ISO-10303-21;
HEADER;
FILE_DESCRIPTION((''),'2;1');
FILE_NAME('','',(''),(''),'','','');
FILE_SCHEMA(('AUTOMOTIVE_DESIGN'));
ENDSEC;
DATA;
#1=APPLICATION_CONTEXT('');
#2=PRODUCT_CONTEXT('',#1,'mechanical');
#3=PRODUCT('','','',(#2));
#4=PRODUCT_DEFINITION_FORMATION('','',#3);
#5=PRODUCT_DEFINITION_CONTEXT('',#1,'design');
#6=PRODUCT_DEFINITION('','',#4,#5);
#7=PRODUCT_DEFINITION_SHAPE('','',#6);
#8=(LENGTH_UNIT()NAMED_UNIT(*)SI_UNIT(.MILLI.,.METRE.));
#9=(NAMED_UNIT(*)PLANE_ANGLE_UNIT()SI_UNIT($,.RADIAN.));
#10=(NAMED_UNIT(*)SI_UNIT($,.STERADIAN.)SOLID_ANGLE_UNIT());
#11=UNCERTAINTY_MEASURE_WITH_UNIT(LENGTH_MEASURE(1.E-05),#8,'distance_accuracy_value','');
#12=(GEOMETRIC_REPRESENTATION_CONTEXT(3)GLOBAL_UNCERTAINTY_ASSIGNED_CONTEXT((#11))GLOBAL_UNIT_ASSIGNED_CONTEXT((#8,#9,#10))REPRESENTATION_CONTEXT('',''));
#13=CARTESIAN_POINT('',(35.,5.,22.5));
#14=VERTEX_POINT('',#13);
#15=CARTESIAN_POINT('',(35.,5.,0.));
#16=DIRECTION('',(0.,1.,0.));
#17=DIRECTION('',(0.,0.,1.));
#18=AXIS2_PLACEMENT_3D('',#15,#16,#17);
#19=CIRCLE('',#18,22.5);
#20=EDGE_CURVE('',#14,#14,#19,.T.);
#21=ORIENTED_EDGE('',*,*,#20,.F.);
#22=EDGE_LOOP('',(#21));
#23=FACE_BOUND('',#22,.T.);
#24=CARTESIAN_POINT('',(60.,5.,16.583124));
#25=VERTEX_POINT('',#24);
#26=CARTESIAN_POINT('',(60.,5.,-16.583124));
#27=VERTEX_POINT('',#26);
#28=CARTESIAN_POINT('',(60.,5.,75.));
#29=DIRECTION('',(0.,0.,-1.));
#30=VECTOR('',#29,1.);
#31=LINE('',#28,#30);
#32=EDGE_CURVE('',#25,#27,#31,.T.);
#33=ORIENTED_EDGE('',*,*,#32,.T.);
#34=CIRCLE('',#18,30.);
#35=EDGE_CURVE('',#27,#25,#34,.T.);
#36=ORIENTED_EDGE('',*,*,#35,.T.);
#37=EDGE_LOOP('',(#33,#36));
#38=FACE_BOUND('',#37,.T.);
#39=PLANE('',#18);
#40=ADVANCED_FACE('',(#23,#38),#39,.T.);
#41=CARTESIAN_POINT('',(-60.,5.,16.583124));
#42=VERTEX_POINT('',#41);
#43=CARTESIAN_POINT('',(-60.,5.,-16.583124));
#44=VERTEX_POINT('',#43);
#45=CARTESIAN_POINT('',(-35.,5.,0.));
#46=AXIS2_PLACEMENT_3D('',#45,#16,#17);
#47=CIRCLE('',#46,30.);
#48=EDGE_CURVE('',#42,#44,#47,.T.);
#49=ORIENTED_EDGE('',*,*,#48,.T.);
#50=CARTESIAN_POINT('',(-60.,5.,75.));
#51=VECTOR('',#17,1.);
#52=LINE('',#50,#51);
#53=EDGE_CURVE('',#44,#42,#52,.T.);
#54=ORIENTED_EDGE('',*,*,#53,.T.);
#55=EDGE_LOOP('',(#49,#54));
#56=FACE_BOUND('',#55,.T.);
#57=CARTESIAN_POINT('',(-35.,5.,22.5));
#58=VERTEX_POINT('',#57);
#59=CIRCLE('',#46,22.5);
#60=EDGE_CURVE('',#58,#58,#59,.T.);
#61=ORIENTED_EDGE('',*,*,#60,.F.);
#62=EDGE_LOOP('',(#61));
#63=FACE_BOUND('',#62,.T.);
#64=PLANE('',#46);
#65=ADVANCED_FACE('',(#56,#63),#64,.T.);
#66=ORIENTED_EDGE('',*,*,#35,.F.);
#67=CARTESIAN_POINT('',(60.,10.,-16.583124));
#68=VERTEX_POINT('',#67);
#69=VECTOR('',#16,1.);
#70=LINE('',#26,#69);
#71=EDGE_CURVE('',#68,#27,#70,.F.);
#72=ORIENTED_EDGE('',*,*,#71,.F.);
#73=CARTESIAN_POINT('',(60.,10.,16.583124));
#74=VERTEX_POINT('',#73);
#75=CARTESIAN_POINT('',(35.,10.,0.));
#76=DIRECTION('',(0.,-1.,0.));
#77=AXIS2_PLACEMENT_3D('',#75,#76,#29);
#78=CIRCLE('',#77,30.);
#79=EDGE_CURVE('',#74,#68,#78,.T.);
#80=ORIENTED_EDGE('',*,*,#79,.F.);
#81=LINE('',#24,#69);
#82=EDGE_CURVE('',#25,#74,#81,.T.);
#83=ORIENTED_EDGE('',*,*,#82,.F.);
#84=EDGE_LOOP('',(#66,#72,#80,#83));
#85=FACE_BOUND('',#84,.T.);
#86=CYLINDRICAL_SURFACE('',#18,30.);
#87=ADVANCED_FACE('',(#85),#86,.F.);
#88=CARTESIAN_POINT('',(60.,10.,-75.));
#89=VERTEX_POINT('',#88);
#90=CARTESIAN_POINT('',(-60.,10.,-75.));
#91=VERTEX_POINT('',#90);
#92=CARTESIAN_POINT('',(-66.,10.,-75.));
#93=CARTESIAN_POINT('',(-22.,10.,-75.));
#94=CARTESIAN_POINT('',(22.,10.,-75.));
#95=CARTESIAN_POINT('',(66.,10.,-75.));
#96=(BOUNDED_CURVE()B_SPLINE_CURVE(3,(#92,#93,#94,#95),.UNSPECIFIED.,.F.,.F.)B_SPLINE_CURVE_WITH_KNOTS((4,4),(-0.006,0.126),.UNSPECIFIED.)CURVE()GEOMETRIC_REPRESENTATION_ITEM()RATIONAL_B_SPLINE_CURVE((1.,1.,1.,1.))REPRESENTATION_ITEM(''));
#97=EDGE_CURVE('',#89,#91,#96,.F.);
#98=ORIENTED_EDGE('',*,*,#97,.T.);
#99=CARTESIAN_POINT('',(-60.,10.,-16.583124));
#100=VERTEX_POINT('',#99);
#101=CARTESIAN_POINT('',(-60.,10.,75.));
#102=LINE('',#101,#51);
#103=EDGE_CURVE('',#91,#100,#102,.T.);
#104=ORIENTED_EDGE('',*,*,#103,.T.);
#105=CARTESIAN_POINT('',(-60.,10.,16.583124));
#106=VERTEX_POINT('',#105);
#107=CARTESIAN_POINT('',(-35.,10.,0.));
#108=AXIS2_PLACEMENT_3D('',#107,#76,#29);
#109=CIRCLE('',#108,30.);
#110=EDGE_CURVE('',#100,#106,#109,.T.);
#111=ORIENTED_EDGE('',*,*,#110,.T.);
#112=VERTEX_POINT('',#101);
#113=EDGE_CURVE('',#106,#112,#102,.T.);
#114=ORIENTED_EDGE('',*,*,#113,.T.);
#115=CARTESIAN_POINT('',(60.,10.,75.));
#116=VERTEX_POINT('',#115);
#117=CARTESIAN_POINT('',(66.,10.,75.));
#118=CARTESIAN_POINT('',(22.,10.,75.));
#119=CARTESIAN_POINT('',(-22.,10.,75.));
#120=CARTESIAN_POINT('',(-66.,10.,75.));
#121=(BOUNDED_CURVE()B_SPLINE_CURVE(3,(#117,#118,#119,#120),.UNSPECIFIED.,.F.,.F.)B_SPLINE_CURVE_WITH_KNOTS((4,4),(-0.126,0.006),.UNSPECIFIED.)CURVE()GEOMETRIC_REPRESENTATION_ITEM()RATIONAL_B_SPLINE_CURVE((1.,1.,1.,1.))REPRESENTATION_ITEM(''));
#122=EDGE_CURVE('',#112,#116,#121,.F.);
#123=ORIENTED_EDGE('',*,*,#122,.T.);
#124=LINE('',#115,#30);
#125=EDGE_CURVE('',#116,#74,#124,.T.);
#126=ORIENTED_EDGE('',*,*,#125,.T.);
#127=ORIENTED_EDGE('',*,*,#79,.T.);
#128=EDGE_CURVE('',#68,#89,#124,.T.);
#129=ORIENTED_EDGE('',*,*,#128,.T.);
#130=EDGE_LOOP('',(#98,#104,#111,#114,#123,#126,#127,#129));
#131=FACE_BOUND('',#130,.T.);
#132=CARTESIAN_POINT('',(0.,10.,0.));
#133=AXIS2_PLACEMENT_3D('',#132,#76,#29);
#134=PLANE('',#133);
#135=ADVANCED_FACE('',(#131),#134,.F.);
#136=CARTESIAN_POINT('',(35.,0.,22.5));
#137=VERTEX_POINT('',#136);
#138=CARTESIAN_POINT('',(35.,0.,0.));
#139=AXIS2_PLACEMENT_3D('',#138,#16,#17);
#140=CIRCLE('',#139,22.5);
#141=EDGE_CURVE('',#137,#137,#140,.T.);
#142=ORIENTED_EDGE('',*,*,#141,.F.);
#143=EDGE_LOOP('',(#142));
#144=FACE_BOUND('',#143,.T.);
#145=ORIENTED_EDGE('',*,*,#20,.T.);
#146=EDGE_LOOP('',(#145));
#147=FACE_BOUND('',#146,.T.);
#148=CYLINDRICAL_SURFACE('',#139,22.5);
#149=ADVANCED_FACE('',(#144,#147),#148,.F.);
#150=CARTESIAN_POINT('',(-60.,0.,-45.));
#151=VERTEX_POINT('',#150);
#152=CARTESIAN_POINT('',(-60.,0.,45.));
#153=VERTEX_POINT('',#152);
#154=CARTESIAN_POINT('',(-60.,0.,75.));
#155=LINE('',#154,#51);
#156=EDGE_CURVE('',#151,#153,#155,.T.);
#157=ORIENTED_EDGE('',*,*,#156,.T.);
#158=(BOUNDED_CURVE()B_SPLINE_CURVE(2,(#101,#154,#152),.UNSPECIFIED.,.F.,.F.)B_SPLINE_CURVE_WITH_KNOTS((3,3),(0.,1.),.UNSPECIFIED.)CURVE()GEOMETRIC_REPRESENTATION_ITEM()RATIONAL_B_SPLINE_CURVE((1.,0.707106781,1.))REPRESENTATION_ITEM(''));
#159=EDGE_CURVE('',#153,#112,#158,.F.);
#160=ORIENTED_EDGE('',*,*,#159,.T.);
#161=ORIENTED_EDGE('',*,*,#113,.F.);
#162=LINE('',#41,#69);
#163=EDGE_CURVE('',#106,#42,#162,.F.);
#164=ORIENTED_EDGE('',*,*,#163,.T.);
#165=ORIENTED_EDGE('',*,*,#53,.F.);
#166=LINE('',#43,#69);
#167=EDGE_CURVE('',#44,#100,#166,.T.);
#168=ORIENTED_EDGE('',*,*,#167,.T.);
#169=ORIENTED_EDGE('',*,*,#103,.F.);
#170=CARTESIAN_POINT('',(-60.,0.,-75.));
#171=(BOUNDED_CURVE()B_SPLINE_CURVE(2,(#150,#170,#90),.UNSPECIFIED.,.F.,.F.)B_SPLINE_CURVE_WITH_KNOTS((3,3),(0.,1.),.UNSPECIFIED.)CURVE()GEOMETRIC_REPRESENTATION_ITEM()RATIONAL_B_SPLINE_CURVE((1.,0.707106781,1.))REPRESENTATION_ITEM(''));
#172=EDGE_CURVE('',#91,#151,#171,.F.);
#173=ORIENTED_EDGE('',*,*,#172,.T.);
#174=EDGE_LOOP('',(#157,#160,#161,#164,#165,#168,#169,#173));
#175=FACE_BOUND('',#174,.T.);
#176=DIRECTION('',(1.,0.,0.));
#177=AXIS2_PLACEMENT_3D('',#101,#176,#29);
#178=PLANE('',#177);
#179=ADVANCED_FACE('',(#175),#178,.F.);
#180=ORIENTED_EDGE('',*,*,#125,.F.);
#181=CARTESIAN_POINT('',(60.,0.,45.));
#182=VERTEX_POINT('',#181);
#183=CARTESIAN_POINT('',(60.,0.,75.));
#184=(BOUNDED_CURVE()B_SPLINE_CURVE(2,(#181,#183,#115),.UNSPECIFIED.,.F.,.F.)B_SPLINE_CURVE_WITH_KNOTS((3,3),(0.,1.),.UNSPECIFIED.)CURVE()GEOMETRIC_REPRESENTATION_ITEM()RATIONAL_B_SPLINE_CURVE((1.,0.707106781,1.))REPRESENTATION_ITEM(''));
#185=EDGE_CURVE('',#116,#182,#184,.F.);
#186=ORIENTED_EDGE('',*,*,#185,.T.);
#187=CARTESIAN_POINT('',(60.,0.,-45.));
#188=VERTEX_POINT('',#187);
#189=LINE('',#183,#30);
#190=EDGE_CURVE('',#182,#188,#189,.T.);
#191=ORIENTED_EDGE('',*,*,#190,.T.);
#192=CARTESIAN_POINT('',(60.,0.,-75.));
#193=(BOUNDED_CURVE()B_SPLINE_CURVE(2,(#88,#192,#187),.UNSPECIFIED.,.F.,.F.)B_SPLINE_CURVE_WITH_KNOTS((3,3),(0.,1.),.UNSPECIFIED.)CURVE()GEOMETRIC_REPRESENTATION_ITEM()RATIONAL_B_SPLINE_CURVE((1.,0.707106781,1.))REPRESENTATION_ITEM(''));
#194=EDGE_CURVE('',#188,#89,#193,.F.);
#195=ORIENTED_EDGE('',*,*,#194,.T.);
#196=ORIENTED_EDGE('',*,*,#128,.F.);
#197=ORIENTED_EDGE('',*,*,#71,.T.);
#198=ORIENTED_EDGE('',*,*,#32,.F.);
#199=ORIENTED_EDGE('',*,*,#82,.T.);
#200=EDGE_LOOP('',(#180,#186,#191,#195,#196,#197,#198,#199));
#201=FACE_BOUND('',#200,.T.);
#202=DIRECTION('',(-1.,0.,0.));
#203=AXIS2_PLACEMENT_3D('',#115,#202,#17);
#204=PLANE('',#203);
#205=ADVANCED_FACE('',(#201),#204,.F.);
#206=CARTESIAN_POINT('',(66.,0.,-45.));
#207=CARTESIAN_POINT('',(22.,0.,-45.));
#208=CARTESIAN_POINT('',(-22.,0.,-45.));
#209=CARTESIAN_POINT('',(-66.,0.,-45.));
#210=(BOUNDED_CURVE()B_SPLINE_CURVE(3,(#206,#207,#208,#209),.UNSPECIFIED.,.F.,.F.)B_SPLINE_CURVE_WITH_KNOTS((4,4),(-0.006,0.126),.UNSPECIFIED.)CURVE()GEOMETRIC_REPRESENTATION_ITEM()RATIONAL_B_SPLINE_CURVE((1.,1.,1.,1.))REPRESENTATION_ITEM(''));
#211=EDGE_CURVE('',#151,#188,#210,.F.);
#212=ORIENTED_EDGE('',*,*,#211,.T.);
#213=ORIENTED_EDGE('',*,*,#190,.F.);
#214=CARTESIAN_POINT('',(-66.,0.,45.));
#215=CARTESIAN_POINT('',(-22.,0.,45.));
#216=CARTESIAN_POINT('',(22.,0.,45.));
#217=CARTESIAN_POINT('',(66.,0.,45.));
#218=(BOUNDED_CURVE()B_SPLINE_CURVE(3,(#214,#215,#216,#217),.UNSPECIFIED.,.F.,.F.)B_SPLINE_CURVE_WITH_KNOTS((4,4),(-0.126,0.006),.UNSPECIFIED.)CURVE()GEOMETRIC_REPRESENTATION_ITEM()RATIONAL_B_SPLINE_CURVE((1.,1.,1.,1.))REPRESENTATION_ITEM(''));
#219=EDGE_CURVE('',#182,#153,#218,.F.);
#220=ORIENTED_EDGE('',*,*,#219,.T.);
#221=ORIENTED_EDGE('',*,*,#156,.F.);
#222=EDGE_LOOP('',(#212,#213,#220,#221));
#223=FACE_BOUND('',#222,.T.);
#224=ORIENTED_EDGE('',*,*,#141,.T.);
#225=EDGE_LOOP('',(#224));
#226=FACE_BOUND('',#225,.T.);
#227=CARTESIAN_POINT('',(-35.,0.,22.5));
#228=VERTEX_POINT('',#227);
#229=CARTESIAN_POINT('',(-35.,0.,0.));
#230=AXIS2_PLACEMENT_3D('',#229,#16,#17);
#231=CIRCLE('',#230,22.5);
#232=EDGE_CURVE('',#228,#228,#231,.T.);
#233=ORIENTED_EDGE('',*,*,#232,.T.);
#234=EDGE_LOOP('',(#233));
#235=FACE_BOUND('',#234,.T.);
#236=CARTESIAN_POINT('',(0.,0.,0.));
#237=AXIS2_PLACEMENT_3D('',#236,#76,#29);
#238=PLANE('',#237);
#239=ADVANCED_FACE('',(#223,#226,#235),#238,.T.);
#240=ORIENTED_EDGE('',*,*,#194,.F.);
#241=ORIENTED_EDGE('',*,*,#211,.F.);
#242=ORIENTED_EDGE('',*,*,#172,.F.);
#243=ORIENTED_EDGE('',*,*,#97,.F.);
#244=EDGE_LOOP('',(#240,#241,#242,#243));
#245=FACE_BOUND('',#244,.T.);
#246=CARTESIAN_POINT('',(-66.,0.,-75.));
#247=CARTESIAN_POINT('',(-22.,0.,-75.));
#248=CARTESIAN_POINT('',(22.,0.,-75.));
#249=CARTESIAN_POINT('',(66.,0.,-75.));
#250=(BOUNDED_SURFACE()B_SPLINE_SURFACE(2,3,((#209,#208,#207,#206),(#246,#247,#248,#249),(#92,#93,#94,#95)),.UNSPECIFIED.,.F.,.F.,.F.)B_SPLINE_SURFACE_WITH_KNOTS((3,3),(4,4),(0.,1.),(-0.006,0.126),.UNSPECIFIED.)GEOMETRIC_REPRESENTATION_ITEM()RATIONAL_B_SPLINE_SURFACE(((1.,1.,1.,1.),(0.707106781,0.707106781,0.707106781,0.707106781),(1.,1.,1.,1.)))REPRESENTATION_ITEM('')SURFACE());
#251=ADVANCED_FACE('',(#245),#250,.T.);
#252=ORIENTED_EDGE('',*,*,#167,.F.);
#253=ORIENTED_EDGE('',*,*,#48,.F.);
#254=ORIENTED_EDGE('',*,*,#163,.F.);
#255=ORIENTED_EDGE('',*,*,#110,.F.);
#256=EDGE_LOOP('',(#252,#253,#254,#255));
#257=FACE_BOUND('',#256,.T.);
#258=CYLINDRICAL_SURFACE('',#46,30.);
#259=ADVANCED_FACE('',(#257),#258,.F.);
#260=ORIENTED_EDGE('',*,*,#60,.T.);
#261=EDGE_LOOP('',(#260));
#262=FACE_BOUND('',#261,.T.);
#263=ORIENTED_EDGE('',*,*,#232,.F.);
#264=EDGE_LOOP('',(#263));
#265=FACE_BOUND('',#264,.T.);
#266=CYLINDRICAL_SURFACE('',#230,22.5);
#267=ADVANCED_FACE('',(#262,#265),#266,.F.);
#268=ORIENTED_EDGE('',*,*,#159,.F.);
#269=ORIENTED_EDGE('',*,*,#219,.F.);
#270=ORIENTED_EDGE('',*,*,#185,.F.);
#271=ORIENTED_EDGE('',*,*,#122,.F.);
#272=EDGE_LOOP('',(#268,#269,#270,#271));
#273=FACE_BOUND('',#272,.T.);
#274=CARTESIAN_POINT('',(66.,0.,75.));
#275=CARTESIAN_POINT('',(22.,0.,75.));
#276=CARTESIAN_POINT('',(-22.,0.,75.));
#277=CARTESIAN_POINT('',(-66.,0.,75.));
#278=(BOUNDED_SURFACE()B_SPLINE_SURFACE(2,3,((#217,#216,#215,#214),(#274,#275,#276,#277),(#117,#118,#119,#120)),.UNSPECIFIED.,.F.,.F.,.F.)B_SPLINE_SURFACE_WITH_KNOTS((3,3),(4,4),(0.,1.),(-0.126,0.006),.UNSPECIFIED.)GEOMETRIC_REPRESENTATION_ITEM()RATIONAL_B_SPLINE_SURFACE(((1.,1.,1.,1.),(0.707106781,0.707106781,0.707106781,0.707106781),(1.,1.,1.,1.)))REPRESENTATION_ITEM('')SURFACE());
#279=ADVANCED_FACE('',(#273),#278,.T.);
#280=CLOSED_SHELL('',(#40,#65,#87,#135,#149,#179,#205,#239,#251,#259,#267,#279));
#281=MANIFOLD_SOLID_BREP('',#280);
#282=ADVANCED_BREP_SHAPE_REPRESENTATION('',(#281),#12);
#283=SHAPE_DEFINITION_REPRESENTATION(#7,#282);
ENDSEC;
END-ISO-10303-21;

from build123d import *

# Parameters (mm, degrees)
SKETCH2_W           = 120
SKETCH2_H           = 150
BOSS_EXTRUDE1_DEPTH = 10
SKETCH3_R           = 30
CUT_EXTRUDE1_DEPTH  = 5
SKETCH4_R           = 22.5
CUT_EXTRUDE2_DEPTH  = 5
FILLET1_SIZE        = 30
FILLET1_SIZE_2      = 10


with BuildPart() as part:
    # Sketch2 → Boss-Extrude1 (new body)
    with BuildSketch(Plane(origin=(0, 0, 0), x_dir=(1, 0, 0), z_dir=(0, 1, 0))):
        Rectangle(SKETCH2_W, SKETCH2_H)
    extrude(amount=BOSS_EXTRUDE1_DEPTH)

    # Sketch3 → Cut-Extrude1 (cut)
    with BuildSketch(Plane(origin=(0, 10, 0), x_dir=(1, 0, 0), z_dir=(0, 1, 0))):
        with Locations((35, 0)):
            Circle(SKETCH3_R)
        with Locations((-35, 0)):
            Circle(SKETCH3_R)
    extrude(amount=-CUT_EXTRUDE1_DEPTH, mode=Mode.SUBTRACT)

    # Sketch4 → Cut-Extrude2 (cut)
    with BuildSketch(Plane(origin=(0, 5, 0), x_dir=(1, 0, 0), z_dir=(0, 1, 0))):
        with Locations(Location((-35, 0, 0), (0, 0, 270))):
            Circle(SKETCH4_R)
        with Locations(Location((35, 0, 0), (0, 0, 270))):
            Circle(SKETCH4_R)
    extrude(amount=-CUT_EXTRUDE2_DEPTH, mode=Mode.SUBTRACT)

    # Fillet1
    # an asymmetric fillet: 30, 10 mm, written as the material it takes off along each edge
    with BuildSketch(Plane(origin=(135, 0, -75), x_dir=(0, 0, 1), z_dir=(-1, 0, 0))) as fillet1_piece_1:
        with BuildLine():
            Bezier((FILLET1_SIZE, 0), (0, 0), (0, FILLET1_SIZE_2), weights=[1, 0.707106781, 1])
            Line((0, FILLET1_SIZE_2), (0, 0))
            Line((0, 0), (FILLET1_SIZE, 0))
        make_face()
    extrude(amount=270, mode=Mode.SUBTRACT)
    with BuildSketch(Plane(origin=(-135, 0, 75), x_dir=(0, 1, 0), z_dir=(1, 0, 0))) as fillet1_piece_2:
        with BuildLine():
            Bezier((FILLET1_SIZE_2, 0), (0, 0), (0, -FILLET1_SIZE), weights=[1, 0.707106781, 1])
            Line((0, -FILLET1_SIZE), (0, 0))
            Line((0, 0), (FILLET1_SIZE_2, 0))
        make_face()
    extrude(amount=270, mode=Mode.SUBTRACT)


solid = part.part
